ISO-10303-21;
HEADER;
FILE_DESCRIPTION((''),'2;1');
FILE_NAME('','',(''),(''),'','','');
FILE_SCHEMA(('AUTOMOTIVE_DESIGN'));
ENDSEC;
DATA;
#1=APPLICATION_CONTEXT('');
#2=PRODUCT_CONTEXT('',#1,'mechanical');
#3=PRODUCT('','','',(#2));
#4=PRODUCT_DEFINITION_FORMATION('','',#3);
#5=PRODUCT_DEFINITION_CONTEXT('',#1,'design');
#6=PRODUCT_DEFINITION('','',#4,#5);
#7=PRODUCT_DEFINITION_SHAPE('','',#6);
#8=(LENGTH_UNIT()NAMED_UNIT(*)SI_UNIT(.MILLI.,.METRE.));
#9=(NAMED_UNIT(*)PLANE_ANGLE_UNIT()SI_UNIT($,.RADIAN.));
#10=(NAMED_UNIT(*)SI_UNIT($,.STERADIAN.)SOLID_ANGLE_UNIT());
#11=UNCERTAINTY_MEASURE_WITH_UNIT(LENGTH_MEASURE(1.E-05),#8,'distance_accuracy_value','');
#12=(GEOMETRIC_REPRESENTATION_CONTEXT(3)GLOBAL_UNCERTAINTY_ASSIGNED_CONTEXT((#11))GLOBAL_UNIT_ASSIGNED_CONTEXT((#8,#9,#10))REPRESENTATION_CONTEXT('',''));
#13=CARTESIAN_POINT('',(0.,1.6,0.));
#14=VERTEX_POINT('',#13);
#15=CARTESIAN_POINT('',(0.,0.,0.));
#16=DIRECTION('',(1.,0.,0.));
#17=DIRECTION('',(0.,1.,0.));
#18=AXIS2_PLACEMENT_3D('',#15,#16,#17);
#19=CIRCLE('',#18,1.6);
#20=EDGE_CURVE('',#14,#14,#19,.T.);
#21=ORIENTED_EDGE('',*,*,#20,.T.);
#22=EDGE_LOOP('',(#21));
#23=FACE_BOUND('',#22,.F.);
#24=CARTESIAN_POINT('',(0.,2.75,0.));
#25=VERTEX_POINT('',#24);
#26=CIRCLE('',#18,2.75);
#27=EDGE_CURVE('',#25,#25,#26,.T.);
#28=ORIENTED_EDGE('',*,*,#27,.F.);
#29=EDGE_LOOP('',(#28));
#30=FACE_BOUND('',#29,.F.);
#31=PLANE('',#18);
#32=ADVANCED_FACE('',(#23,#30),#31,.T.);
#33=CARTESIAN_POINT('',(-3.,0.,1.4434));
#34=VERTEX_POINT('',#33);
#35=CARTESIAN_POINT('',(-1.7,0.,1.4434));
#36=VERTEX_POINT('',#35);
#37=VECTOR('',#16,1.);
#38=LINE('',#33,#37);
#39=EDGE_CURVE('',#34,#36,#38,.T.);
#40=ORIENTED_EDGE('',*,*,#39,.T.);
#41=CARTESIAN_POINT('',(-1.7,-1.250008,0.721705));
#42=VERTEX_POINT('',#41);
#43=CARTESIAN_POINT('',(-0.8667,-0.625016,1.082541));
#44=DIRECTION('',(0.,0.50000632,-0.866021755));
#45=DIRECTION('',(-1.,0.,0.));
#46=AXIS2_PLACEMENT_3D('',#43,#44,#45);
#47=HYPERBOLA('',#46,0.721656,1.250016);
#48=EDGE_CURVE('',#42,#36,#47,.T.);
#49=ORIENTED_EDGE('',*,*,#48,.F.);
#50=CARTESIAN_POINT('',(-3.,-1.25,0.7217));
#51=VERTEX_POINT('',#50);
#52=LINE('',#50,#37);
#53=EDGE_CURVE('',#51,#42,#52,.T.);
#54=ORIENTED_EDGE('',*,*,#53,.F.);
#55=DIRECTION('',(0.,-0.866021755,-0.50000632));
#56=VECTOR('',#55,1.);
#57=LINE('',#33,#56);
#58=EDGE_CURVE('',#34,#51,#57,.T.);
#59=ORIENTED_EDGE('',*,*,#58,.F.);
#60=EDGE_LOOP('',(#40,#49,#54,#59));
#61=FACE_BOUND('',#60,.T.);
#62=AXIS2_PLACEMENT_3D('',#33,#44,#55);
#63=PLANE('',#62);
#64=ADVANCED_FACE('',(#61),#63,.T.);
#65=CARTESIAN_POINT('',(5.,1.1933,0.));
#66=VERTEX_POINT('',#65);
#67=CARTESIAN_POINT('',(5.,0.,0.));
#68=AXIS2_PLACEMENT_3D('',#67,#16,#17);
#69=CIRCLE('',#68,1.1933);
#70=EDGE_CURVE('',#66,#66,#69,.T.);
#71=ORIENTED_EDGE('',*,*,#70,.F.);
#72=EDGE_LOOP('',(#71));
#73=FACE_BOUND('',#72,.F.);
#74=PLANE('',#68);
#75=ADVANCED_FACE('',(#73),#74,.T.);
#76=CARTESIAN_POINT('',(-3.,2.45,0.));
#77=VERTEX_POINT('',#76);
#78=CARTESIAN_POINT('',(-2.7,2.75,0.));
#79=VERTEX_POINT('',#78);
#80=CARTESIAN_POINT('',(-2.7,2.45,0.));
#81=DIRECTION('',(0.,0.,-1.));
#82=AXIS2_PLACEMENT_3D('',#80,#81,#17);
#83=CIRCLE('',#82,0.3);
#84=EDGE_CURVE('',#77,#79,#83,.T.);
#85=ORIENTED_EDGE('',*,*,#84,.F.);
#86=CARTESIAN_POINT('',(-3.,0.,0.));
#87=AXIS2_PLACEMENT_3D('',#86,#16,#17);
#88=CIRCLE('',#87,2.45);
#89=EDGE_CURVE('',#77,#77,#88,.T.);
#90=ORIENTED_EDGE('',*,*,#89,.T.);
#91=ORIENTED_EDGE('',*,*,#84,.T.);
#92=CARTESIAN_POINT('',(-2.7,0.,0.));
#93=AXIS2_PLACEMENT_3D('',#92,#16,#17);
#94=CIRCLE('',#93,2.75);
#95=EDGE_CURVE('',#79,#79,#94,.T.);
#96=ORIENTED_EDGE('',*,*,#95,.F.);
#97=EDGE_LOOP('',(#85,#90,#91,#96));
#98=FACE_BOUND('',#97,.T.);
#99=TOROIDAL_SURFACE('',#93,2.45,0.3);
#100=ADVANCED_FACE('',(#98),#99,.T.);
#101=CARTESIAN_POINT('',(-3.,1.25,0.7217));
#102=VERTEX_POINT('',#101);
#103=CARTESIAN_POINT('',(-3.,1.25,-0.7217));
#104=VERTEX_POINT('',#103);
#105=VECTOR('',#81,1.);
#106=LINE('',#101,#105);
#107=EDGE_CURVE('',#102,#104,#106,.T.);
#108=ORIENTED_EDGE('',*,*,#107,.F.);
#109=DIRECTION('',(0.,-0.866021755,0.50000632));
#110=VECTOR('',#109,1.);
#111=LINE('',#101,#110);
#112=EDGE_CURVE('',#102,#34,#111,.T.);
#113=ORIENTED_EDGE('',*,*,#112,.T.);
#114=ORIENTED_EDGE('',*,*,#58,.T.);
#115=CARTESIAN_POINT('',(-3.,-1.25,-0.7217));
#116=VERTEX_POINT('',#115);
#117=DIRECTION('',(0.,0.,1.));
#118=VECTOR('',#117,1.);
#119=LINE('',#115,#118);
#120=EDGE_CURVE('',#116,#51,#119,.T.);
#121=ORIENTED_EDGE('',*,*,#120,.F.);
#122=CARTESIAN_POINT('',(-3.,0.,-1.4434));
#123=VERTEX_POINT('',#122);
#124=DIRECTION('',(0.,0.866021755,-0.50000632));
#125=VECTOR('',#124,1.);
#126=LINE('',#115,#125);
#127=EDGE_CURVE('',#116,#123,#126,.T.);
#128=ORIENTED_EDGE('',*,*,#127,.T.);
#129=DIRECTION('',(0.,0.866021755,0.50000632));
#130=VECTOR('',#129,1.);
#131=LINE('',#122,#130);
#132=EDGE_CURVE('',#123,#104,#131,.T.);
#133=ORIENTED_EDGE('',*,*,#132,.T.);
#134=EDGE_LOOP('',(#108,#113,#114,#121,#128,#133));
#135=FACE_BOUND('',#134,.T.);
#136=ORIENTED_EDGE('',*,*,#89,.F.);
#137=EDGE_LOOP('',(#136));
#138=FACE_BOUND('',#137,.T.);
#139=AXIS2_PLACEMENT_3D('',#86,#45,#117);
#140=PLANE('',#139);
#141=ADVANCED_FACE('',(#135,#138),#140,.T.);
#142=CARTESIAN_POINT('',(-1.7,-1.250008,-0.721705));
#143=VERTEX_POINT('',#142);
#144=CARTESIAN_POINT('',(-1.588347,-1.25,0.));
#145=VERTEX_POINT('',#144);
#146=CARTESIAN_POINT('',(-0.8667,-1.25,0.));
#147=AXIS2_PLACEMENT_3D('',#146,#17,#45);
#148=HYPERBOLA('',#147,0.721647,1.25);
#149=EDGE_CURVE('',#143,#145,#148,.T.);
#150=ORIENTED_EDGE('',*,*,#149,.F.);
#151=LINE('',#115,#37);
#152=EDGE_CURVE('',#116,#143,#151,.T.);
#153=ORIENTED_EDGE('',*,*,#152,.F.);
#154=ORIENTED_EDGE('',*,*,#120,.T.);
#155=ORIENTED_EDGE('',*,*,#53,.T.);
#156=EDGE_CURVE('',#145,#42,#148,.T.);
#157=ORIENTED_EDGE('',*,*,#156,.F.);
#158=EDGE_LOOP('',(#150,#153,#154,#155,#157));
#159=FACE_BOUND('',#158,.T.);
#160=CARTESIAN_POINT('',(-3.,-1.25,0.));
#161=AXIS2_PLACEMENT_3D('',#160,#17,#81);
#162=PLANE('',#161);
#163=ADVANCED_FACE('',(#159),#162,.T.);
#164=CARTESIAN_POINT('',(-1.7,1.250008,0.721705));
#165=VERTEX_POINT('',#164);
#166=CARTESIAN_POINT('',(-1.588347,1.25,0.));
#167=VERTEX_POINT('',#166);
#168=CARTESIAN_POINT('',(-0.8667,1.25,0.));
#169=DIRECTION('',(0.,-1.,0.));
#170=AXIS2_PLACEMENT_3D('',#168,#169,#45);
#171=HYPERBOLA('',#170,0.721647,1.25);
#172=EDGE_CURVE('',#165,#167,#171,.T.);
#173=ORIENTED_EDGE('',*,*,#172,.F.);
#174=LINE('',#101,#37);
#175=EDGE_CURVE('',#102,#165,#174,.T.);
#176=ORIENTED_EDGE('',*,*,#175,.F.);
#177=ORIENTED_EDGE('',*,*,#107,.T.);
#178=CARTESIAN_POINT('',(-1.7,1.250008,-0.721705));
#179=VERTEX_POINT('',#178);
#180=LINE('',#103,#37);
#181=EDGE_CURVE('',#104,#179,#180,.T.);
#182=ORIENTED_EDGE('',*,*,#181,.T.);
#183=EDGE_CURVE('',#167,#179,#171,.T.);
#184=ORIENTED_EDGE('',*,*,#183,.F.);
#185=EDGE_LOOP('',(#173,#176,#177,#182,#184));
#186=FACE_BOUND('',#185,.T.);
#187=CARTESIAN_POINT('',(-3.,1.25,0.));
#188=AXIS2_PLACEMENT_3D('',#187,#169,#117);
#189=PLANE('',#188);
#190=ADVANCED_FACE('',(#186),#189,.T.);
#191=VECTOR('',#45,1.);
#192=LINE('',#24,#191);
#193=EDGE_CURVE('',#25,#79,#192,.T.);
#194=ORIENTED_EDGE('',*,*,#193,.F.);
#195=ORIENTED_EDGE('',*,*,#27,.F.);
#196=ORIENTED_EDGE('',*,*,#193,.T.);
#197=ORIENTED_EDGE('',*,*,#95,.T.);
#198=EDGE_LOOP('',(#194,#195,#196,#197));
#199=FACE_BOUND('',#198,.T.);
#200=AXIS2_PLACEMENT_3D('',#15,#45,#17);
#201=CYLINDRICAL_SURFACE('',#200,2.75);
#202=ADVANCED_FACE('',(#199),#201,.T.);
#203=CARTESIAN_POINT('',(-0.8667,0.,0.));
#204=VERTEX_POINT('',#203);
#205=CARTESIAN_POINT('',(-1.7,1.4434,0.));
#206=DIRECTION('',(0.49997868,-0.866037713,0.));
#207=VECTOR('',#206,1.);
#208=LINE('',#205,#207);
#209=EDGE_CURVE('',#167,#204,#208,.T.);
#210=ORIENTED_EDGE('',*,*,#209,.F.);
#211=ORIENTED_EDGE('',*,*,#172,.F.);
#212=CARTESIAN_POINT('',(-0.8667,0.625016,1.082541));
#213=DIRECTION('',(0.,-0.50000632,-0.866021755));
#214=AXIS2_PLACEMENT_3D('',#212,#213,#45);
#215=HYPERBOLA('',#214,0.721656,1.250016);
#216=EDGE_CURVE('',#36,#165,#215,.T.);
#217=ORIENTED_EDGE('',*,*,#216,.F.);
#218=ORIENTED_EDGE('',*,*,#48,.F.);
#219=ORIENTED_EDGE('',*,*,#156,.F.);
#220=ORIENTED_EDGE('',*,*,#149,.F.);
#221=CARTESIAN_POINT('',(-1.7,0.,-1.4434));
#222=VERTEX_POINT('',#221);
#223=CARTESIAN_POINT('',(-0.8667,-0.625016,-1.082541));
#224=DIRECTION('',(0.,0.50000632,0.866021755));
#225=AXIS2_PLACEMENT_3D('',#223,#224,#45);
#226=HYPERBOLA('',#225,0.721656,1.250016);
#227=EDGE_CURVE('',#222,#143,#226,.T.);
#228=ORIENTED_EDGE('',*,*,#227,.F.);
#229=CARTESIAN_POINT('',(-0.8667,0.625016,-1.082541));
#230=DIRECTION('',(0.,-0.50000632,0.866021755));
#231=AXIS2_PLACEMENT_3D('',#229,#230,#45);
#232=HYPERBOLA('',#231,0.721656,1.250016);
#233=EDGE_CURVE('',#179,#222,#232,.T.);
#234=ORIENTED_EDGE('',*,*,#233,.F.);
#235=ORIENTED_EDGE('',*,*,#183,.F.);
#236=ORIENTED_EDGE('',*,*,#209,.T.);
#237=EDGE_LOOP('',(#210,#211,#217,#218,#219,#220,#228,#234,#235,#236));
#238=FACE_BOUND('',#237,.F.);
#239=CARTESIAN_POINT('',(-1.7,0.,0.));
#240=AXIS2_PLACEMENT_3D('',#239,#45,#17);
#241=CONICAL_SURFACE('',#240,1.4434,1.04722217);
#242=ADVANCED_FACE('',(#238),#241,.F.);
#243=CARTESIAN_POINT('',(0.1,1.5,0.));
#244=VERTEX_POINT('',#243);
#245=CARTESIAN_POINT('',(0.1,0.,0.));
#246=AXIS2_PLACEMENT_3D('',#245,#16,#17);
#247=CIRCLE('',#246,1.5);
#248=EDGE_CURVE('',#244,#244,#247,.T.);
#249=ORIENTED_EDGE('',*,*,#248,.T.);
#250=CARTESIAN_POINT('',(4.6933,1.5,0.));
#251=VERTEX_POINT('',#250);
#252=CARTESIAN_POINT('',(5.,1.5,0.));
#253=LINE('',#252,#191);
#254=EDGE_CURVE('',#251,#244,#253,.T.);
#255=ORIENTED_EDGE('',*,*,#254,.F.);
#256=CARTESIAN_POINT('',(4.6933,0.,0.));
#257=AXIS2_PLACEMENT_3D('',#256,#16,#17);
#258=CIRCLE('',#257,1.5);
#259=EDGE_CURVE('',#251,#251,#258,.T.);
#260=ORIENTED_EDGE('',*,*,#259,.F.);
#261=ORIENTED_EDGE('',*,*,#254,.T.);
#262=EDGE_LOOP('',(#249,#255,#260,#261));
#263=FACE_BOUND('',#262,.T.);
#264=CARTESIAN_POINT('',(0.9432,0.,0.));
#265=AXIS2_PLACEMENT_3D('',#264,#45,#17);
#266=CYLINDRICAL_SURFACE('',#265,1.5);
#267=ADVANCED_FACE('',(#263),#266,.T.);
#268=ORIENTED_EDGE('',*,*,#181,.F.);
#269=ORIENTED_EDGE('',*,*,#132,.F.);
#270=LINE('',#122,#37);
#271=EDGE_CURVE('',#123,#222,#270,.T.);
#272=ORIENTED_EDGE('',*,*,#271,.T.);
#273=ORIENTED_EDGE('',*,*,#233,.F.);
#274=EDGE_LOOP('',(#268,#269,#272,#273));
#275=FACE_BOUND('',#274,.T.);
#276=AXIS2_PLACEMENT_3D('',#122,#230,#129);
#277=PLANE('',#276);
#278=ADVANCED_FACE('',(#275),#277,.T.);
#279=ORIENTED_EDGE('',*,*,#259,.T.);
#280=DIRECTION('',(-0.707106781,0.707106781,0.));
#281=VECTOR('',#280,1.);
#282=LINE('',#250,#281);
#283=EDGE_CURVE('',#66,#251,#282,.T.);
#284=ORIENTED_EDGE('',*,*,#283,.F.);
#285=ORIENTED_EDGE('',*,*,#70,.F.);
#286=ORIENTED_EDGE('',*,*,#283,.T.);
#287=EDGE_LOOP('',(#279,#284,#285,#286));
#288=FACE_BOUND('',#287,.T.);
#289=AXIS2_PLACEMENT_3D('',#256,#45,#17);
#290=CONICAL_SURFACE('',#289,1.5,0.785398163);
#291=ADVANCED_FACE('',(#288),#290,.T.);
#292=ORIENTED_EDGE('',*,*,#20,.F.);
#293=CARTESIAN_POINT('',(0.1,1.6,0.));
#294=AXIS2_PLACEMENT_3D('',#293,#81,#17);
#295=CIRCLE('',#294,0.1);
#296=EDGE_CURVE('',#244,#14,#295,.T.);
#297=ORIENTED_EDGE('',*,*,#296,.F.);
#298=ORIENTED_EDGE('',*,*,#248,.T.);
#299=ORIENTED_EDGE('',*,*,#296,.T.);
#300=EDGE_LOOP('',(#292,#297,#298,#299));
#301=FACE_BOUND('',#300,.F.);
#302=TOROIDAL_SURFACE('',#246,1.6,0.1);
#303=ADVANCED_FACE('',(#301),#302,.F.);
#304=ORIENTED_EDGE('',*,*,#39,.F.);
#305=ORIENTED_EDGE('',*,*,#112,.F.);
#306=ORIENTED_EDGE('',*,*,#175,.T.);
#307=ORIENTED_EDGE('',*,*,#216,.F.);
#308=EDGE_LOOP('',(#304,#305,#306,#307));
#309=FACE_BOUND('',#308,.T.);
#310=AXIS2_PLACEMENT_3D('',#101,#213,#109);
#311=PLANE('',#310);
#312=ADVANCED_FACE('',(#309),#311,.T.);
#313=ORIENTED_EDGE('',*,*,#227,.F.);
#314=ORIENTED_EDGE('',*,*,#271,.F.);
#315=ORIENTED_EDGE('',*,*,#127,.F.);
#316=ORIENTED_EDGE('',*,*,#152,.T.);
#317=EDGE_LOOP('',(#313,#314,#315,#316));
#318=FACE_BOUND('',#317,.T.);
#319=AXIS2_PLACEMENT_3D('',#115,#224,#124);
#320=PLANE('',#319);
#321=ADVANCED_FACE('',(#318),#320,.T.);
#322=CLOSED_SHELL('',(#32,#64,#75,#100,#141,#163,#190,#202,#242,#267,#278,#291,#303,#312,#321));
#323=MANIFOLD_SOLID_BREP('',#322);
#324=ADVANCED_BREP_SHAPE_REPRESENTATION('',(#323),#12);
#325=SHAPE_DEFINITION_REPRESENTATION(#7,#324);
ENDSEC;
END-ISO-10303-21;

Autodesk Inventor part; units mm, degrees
ref_plane "YZ Plane" through (0, 0, 0) normal (1, 0, 0) x (0, 1, 0)
ref_plane "XZ Plane" through (0, 0, 0) normal (0, 1, 0) x (-1, 0, 0)
sketch "Skizze1" plane through (0, 0, 0) normal (0, 0, 1) x (1, 0, 0)
  line L0 (-0.8667, 0) -> (5, 0)
  line L1 (5, 0) -> (5, 1.5)
  line L2 (5, 1.5) -> (1.25, 1.5)
  line L3 (1.25, 1.5) -> (0.9432, 1.5)
  line L4 (0.9432, 1.5) -> (0, 1.5)
  line L5 (0, 1.5) -> (0, 2.75)
  line L6 (0, 2.75) -> (-3, 2.75)
  line L7 (-3, 2.75) -> (-3, 1.4434)
  line L8 (-3, 1.4434) -> (-1.7, 1.4434)
  line L9 (-1.7, 1.4434) -> (-0.8667, 0)
  line L10 (-4.6, 0) -> (6.6, 0) projected
  line L11 (0, -0.55) -> (0, 3.3) projected
  line L12 (1.25, 1.5) -> (0, 1.5) construction
  dimension "d1" = 3.75
  dimension "d2" = 0.3068
  dimension "d3" = 3
  dimension "d4" = 1.3
  dimension "d5" = 60
  dimension "d6" = 3
  dimension "d7" = 3
  dimension "d8" = 2.8868
  dimension "d9" = 5.5
  dimension "d26" = 5
revolve "Körper" add sketch "Skizze1" angle 360 about axis through (-0.8667, 0, 0) along (1, 0, 0)
sketch "Skizze2" plane through (-3, 0, 0) normal (-1, 0, 0) x (0, 0, 1)
  circle A0 centre (0, 0) radius 1.4434 projected
  line L0 (0, -3.85) -> (0, 3.85) projected
  line L1 (-3.85, 0) -> (3.85, 0) projected
  line L2 (1.4434, 0) -> (0.7217, -1.25)
  line L3 (0.7217, -1.25) -> (-0.7217, -1.25)
  line L4 (-0.7217, -1.25) -> (-1.4434, 0)
  line L5 (-1.4434, 0) -> (-0.7217, 1.25)
  line L6 (-0.7217, 1.25) -> (0.7217, 1.25)
  line L7 (0.7217, 1.25) -> (1.4434, 0)
extrude "Loch" add sketch "Skizze2" against normal up to next contours L7 A0 | A0 L2 | L6 L0 A0 | A0 L0 L3 | L0 L6 A0 | A0 L3 L0 | L4 A0 | A0 L5
fillet "Rundung1" radius 0.3 1 edges at (-3, -2.75, 0)
thread "Gewinde" size "M3x0.5" class "6g" standard "ISO Metric profile" length 3.75
chamfer "Fase1" distance 0.3067 distance2 0.3067 1 edges at (5, -1.5, 0) measured on face at (5, -0.2617, -0.7882)
ref_plane "Work Plane1" through (29, 0, 0) normal (0, -1, 0) x (1, 0, 0)
fillet "Fillet2" radius 0.1 1 edges at (0, -1.5, 0)
equation "\"d30\" = R"
equation "\"d15\" = -0.5 * SPD + 0.5 * GD"
equation "\"d16\" = GUL"
equation "\"d17\" = RR"
equation "\"d13\" = GEL"
equation "\"d1\" = GEL"
equation "\"d3\" = KOH"
equation "\"d4\" = INTI"
equation "\"d6\" = GD"
equation "\"d7\" = BDM"
equation "\"d8\" = 1.1547 * SW"
equation "\"d9\" = KOD"
equation "\"d26\" = NLG"
equation "\"GD\" = NND"
equation "\"NLG\" = 5"
equation "\"GEL\" = 3.75"
equation "\"KOD\" = 5.5"
equation "\"KOH\" = 3"
equation "\"INTI\" = 1.3"
equation "\"GAL\" = 0.61345 * PTC"
equation "\"GUL\" = 0.61345 * PTC"
equation "\"BDM\" = NND"
equation "\"SW\" = 2.5"
equation "\"RR\" = 0.3"
equation "\"SPD\" = NND - 1.2269 * PTC"
equation "\"R\" = 0.1"
equation "\"TOA\" = 30deg"
equation "\"GD1\" = THREADDIA - 1.2269 * PTC"
equation "\"THREADDIA\" = 3"
equation "\"FAWI\" = 45deg"
equation "\"ANG\" = 120deg"
equation "\"PTC\" = 0.5"
equation "\"NND\" = 3"
equation "\"E0\" = 1.155 * SW"
properties part number "DIN 912 - M3 x 5" material "Stahl, weich"
